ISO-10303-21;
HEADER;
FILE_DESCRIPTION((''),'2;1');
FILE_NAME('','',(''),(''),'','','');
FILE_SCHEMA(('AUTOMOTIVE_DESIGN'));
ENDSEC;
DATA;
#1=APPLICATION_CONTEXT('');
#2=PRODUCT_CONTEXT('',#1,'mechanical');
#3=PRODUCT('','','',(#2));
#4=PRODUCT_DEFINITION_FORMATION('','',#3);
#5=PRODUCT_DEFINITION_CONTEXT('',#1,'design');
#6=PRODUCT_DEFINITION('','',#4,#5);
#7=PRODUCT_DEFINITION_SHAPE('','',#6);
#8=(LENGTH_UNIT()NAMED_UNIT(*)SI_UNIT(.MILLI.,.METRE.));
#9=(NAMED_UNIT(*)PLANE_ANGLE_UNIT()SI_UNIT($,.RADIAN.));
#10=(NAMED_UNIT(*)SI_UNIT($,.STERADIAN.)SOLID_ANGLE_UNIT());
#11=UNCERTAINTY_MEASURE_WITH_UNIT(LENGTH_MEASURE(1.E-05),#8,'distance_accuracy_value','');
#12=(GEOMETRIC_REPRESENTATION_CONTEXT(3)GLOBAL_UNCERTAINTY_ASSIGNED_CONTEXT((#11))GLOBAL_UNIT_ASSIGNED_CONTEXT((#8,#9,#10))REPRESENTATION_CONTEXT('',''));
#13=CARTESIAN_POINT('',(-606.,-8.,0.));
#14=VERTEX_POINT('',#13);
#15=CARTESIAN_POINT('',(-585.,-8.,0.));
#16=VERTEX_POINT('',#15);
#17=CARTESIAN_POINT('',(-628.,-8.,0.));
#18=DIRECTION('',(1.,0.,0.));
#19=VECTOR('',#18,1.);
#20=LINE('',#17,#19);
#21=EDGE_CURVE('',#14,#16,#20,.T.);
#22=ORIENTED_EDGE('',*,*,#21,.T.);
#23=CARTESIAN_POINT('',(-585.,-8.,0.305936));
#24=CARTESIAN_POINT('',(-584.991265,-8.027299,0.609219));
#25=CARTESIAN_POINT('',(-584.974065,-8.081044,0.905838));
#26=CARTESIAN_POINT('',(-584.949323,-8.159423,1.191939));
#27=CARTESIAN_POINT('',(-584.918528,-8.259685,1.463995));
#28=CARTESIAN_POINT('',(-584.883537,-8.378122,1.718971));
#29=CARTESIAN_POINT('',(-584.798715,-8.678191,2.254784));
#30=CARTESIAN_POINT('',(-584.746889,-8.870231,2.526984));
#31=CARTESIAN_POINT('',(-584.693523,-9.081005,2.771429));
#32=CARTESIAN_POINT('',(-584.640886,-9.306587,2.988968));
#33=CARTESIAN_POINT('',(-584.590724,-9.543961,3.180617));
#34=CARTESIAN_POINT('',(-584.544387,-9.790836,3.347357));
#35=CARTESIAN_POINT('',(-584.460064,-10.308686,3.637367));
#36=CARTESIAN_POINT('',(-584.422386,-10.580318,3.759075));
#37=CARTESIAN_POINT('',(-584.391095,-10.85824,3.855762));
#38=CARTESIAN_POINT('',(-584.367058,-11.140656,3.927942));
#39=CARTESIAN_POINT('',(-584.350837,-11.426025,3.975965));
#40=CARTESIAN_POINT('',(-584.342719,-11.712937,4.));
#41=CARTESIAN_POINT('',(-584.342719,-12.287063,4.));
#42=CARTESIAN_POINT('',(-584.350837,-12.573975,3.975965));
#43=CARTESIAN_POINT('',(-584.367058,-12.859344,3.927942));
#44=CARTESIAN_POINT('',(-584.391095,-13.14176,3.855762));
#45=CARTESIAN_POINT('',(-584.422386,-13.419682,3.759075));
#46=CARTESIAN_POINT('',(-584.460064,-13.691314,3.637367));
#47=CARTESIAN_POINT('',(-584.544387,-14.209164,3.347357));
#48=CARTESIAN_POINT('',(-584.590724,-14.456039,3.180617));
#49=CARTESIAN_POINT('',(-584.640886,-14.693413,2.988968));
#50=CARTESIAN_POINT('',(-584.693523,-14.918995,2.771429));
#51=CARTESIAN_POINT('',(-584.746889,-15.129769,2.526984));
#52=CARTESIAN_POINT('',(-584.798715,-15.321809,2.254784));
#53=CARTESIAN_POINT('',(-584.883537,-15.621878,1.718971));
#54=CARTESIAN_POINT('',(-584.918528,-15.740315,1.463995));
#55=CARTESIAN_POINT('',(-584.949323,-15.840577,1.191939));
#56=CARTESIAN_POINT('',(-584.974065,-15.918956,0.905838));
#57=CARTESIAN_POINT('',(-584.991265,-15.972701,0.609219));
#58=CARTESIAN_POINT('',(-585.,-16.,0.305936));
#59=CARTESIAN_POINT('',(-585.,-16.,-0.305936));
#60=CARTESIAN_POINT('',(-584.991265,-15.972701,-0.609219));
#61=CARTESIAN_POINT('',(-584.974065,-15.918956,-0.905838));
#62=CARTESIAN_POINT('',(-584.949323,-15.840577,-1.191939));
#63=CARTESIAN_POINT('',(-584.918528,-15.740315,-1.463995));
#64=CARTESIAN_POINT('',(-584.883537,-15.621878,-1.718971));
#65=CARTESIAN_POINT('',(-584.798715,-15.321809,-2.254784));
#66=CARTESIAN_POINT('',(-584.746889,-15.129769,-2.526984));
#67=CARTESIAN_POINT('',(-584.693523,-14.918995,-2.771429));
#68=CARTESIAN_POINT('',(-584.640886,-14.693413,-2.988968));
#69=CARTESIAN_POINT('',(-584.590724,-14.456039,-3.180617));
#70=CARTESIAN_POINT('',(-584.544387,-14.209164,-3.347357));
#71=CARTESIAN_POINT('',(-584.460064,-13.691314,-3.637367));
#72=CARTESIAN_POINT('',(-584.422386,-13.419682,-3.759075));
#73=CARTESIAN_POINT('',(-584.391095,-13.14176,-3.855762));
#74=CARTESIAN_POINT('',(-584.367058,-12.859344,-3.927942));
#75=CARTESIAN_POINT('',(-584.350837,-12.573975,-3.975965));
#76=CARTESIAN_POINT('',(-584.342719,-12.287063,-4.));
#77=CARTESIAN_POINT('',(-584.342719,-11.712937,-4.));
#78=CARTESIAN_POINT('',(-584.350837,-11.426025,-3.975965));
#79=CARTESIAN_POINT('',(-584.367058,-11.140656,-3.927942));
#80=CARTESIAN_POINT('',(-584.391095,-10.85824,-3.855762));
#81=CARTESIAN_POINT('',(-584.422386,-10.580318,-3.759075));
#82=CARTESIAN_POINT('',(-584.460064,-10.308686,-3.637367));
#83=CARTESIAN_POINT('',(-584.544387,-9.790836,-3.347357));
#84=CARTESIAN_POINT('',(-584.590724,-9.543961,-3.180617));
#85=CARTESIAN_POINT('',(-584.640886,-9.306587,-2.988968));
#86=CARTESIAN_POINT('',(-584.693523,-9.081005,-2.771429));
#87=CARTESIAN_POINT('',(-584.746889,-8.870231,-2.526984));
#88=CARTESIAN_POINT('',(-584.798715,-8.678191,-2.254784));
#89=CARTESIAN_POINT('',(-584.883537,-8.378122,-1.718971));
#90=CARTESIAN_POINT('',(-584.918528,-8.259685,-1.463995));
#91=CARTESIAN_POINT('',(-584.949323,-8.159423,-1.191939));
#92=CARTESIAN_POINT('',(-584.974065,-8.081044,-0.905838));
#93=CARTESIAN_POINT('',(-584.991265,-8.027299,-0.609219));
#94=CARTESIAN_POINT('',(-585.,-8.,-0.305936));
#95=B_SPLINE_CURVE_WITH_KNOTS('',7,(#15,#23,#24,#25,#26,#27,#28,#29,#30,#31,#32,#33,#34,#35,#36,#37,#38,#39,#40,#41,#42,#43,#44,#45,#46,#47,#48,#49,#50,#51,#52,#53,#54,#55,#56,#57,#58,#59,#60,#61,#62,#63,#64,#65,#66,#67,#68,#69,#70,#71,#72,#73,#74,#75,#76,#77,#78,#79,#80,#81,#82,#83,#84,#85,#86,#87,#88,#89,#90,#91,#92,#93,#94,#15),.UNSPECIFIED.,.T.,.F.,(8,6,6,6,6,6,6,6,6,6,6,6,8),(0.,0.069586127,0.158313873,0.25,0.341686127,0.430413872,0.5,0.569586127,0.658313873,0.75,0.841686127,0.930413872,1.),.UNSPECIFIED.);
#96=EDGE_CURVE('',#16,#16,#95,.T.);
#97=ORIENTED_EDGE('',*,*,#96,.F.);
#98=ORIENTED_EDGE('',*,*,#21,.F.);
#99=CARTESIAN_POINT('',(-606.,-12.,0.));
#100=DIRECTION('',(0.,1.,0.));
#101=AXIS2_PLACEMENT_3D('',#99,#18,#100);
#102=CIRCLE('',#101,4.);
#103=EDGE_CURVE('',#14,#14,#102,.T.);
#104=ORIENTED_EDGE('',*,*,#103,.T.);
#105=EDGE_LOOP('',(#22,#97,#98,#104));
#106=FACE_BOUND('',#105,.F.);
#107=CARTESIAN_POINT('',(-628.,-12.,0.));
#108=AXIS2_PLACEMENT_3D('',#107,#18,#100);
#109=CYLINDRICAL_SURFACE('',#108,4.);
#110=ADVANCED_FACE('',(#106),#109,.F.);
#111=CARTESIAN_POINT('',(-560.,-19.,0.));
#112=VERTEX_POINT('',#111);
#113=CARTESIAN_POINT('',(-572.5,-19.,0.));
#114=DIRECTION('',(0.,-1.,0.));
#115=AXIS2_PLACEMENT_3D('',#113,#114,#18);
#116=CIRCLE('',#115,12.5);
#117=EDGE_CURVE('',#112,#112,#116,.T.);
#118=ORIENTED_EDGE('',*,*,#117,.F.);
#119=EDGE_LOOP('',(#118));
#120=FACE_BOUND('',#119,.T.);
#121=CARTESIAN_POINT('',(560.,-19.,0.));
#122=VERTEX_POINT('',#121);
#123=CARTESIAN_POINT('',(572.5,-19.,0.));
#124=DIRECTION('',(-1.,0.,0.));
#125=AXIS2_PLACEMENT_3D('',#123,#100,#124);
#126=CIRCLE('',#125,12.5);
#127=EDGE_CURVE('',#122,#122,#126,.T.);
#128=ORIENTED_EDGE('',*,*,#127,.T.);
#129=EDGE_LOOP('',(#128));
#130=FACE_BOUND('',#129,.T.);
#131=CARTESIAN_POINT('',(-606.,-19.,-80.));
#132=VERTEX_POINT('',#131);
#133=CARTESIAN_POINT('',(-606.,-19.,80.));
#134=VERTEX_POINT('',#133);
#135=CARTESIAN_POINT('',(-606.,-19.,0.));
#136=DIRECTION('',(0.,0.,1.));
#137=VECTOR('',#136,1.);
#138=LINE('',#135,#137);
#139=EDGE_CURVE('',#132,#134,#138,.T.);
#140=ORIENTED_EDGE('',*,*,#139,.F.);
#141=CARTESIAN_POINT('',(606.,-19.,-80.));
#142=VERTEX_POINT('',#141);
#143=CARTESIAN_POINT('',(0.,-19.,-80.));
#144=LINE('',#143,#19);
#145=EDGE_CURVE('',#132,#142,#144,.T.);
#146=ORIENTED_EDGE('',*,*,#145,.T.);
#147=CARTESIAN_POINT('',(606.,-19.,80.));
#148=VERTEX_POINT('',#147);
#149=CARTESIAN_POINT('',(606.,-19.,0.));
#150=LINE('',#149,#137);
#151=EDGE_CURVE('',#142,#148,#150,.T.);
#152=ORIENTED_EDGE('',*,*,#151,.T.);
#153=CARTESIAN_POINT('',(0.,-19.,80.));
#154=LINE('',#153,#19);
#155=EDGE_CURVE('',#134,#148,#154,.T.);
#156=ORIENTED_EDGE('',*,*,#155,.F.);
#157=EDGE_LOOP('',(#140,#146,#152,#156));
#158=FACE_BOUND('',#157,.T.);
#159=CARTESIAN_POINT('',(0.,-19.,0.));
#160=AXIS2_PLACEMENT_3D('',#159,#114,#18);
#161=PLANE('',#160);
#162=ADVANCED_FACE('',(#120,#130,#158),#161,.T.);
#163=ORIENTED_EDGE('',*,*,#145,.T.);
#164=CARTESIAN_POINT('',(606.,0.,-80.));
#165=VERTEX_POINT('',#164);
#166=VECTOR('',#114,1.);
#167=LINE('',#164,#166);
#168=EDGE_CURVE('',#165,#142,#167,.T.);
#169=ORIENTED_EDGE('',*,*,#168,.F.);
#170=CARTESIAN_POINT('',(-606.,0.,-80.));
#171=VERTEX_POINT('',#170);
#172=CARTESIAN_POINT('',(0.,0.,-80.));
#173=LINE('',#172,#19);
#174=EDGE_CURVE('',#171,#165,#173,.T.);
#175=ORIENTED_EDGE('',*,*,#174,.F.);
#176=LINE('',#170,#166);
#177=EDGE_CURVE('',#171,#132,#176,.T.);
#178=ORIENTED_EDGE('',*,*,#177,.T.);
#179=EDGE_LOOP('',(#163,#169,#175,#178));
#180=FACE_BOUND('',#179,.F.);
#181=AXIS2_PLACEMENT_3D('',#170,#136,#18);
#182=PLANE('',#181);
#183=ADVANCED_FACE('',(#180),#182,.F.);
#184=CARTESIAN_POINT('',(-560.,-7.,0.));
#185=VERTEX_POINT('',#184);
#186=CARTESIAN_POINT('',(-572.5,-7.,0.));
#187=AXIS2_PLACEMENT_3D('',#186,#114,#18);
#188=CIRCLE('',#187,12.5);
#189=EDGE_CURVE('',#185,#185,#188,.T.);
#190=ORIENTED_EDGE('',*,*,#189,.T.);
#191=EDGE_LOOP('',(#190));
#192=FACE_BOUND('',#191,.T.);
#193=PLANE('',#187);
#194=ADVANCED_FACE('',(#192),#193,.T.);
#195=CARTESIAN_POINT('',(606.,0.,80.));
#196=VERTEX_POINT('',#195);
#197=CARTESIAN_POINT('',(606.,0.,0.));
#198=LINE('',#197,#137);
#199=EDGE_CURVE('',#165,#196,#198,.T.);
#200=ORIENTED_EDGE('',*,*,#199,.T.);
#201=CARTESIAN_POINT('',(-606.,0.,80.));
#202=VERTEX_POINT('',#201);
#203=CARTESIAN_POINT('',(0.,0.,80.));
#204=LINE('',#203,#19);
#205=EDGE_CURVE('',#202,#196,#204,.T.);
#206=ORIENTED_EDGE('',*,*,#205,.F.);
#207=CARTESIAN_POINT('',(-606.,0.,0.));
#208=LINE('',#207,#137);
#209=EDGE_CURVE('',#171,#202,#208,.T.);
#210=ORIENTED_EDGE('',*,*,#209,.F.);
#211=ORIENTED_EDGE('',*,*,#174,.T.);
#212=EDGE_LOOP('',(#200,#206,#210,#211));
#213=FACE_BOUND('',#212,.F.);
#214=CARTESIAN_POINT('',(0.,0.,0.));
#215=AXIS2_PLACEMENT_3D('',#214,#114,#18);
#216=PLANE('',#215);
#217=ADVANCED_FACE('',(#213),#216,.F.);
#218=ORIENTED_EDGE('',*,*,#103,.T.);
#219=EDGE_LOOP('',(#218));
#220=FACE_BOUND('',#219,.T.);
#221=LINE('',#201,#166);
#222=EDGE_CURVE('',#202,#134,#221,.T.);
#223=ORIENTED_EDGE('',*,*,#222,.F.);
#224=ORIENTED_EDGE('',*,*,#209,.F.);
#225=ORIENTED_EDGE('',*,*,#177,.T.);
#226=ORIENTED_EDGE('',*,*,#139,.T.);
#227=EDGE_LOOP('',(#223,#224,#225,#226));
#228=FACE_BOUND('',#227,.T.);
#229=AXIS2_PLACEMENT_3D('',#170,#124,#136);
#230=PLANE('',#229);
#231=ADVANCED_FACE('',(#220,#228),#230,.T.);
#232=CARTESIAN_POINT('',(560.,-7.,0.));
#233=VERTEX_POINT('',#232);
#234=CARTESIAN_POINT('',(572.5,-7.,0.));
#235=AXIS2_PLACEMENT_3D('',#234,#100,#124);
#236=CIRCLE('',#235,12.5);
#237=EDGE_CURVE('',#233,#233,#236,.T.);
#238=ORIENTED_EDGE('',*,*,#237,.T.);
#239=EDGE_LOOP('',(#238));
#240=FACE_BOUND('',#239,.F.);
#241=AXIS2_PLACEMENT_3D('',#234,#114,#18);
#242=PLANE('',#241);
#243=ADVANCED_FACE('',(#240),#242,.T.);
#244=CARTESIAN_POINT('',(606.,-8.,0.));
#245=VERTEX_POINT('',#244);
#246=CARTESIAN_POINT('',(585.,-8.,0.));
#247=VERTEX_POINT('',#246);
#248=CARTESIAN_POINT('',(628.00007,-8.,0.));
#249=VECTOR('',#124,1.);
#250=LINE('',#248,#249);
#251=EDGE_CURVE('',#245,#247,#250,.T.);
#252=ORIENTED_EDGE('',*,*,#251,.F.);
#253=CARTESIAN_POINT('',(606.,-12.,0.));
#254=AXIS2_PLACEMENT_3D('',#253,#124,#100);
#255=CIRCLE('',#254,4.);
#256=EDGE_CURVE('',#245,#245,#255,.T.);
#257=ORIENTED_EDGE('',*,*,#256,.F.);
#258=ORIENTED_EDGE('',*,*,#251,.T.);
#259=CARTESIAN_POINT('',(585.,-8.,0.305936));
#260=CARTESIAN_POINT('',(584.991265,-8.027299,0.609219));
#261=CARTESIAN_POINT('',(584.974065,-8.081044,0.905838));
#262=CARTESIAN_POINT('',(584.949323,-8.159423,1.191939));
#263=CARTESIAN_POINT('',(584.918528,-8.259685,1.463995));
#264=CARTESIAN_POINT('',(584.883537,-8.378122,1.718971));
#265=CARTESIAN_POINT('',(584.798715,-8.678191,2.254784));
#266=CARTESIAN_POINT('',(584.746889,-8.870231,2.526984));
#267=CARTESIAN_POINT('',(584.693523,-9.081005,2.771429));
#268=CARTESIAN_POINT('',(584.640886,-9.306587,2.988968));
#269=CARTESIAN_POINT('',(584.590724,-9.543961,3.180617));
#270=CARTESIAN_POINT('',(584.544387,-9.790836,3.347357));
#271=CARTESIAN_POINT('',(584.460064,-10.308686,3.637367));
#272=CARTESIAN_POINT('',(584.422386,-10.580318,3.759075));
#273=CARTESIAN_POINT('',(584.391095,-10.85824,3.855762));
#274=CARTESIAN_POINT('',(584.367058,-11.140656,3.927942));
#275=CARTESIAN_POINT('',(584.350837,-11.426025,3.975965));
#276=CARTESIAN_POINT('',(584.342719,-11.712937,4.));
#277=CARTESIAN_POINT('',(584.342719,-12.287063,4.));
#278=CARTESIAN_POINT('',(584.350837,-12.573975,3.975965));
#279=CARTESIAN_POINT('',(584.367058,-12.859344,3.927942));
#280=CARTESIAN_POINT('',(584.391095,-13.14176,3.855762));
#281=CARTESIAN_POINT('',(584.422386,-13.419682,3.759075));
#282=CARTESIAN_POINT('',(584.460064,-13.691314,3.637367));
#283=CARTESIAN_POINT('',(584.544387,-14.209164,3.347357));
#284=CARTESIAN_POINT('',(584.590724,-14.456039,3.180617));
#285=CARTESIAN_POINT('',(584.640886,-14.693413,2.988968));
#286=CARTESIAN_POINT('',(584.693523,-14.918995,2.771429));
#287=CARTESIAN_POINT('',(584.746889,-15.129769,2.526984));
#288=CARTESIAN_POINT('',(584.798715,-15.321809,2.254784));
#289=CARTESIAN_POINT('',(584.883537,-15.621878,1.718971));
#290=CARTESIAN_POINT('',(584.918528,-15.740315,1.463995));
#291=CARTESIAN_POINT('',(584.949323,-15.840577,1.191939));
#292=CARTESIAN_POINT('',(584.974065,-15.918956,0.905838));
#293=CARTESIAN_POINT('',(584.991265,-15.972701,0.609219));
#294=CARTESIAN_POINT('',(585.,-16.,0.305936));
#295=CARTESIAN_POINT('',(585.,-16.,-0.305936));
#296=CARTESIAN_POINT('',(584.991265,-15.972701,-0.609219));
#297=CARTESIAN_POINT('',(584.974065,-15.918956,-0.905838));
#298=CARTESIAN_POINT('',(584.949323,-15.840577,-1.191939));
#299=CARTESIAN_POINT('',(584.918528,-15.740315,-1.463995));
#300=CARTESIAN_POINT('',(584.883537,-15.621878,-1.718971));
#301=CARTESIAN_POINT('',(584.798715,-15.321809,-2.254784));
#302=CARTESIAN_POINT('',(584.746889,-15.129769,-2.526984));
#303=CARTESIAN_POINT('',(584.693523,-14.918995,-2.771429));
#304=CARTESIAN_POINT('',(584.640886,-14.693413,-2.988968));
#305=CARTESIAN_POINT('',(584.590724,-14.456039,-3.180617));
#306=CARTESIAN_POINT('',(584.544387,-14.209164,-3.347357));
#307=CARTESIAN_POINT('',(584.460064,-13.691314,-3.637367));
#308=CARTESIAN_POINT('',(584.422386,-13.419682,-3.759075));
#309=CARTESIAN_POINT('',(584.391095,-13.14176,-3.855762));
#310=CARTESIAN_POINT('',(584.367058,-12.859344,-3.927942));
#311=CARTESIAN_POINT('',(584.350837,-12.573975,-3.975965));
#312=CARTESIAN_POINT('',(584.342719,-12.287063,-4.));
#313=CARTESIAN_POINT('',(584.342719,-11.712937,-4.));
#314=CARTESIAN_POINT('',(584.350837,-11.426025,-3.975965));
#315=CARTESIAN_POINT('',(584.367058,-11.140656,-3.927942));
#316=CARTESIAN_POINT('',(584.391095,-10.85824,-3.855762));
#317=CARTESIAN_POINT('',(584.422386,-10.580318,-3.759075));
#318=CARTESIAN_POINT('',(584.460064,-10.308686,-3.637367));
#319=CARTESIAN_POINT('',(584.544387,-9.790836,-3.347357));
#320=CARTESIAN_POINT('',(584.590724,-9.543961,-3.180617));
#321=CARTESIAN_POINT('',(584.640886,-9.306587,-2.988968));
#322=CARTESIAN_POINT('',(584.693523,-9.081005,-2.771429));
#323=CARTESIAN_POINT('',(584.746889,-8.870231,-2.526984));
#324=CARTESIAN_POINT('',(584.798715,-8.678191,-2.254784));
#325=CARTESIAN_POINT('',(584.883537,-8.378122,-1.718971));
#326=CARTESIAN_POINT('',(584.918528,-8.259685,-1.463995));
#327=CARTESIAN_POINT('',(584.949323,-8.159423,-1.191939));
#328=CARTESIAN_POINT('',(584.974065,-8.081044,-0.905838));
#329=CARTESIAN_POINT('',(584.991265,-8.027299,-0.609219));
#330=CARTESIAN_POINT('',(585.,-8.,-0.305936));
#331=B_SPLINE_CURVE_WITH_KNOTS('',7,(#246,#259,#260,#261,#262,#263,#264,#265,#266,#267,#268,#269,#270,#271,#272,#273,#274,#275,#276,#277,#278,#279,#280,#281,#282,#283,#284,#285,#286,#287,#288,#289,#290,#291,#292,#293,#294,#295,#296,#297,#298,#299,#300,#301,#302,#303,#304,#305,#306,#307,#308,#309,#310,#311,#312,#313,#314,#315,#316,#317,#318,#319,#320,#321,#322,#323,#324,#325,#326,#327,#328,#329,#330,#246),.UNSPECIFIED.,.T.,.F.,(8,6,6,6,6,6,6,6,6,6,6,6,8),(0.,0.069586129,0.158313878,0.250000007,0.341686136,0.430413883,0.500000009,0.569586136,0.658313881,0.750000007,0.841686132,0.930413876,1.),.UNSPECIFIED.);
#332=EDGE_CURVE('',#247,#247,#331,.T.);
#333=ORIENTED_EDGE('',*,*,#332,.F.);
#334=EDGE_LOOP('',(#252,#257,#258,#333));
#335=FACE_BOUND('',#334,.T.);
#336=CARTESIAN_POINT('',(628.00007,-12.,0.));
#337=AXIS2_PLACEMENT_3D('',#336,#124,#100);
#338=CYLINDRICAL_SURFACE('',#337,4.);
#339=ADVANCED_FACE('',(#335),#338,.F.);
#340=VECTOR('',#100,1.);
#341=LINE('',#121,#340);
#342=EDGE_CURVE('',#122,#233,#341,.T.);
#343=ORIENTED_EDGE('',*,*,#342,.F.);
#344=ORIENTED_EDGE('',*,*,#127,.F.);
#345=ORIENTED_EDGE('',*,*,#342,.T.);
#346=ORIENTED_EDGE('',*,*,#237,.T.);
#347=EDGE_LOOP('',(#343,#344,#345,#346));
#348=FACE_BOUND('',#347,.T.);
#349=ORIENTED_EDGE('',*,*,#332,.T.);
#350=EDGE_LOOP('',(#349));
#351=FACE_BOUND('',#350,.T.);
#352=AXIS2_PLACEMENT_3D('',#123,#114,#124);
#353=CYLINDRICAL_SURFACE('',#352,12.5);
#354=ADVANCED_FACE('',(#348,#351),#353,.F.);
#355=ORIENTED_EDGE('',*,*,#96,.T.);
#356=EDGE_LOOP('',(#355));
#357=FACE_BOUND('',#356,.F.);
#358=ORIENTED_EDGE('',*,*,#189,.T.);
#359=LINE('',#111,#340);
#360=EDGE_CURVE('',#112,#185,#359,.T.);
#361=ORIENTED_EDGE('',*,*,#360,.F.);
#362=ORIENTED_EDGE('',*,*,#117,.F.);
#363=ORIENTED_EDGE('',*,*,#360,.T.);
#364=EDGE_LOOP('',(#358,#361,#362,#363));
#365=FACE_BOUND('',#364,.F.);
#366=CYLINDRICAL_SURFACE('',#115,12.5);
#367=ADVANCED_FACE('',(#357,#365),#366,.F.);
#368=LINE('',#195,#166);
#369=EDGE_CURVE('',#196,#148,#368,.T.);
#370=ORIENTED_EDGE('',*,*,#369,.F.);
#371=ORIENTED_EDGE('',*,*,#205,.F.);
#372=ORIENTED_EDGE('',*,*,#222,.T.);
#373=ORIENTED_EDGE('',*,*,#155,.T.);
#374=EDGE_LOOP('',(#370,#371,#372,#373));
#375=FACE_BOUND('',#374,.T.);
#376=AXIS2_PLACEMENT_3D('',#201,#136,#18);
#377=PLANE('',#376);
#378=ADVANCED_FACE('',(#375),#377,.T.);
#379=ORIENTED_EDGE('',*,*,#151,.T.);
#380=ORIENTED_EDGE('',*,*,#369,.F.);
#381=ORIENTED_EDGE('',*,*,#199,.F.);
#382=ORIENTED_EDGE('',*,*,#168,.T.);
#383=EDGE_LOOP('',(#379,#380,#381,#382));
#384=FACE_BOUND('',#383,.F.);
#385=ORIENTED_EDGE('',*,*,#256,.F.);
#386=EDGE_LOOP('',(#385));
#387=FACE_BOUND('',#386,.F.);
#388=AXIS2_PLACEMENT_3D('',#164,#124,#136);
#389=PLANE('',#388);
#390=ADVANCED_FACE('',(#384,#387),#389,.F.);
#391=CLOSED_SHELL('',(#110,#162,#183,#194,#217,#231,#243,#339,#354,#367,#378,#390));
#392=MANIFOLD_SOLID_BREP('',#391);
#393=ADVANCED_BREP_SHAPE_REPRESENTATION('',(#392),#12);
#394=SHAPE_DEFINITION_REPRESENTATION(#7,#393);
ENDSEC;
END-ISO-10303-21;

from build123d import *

# Parameters (mm, degrees)
F0_W     = 1212
F0_H     = 160
F1_DEPTH = 19
F2_R     = 12.5
F3_DEPTH = 12
F5_D     = 8
F5_DEPTH = 22
F5_TIP   = 2.4034424761


# Not quite as in the source:
# - a pattern or mirror of a feature is missing from the dataset's text; its kind, count and spacing are read off the source's solid


with BuildPart() as f1:
    # F0 (on Front) → F1 (new body)
    with BuildSketch(Plane.XZ):
        Rectangle(F0_W, F0_H)
    extrude(amount=F1_DEPTH)

    # F2 (on face) → F3 (cut)
    with BuildSketch(Plane.XZ.offset(19)):
        with Locations((-572.5, 0)):
            Circle(F2_R)
    f3 = extrude(amount=-F3_DEPTH, mode=Mode.SUBTRACT)

    # F3_copies: F3 across plane
    add(f3.mirror(Plane(origin=(0, 0, 0), x_dir=(0, 0, 1), z_dir=(1, 0, 0))), mode=Mode.SUBTRACT)

    # F5
    with Locations(Plane(origin=(-606, 0, 0), x_dir=(0, -1, 0), z_dir=(-1, 0, 0))):
        with Locations((12, 0)):
            f5 = Hole(F5_D / 2, depth=F5_DEPTH)
            with Locations((0, 0, -(F5_DEPTH + F5_TIP / 2))):  # 118° drill point
                Cone(0, F5_D / 2, F5_TIP, mode=Mode.SUBTRACT)

    # F5_copies: F5 across plane
    add(f5.mirror(Plane(origin=(3.5e-05, 0, 0), x_dir=(0, 0, 1), z_dir=(1, 0, 0))), mode=Mode.SUBTRACT)


solid = f1.part
